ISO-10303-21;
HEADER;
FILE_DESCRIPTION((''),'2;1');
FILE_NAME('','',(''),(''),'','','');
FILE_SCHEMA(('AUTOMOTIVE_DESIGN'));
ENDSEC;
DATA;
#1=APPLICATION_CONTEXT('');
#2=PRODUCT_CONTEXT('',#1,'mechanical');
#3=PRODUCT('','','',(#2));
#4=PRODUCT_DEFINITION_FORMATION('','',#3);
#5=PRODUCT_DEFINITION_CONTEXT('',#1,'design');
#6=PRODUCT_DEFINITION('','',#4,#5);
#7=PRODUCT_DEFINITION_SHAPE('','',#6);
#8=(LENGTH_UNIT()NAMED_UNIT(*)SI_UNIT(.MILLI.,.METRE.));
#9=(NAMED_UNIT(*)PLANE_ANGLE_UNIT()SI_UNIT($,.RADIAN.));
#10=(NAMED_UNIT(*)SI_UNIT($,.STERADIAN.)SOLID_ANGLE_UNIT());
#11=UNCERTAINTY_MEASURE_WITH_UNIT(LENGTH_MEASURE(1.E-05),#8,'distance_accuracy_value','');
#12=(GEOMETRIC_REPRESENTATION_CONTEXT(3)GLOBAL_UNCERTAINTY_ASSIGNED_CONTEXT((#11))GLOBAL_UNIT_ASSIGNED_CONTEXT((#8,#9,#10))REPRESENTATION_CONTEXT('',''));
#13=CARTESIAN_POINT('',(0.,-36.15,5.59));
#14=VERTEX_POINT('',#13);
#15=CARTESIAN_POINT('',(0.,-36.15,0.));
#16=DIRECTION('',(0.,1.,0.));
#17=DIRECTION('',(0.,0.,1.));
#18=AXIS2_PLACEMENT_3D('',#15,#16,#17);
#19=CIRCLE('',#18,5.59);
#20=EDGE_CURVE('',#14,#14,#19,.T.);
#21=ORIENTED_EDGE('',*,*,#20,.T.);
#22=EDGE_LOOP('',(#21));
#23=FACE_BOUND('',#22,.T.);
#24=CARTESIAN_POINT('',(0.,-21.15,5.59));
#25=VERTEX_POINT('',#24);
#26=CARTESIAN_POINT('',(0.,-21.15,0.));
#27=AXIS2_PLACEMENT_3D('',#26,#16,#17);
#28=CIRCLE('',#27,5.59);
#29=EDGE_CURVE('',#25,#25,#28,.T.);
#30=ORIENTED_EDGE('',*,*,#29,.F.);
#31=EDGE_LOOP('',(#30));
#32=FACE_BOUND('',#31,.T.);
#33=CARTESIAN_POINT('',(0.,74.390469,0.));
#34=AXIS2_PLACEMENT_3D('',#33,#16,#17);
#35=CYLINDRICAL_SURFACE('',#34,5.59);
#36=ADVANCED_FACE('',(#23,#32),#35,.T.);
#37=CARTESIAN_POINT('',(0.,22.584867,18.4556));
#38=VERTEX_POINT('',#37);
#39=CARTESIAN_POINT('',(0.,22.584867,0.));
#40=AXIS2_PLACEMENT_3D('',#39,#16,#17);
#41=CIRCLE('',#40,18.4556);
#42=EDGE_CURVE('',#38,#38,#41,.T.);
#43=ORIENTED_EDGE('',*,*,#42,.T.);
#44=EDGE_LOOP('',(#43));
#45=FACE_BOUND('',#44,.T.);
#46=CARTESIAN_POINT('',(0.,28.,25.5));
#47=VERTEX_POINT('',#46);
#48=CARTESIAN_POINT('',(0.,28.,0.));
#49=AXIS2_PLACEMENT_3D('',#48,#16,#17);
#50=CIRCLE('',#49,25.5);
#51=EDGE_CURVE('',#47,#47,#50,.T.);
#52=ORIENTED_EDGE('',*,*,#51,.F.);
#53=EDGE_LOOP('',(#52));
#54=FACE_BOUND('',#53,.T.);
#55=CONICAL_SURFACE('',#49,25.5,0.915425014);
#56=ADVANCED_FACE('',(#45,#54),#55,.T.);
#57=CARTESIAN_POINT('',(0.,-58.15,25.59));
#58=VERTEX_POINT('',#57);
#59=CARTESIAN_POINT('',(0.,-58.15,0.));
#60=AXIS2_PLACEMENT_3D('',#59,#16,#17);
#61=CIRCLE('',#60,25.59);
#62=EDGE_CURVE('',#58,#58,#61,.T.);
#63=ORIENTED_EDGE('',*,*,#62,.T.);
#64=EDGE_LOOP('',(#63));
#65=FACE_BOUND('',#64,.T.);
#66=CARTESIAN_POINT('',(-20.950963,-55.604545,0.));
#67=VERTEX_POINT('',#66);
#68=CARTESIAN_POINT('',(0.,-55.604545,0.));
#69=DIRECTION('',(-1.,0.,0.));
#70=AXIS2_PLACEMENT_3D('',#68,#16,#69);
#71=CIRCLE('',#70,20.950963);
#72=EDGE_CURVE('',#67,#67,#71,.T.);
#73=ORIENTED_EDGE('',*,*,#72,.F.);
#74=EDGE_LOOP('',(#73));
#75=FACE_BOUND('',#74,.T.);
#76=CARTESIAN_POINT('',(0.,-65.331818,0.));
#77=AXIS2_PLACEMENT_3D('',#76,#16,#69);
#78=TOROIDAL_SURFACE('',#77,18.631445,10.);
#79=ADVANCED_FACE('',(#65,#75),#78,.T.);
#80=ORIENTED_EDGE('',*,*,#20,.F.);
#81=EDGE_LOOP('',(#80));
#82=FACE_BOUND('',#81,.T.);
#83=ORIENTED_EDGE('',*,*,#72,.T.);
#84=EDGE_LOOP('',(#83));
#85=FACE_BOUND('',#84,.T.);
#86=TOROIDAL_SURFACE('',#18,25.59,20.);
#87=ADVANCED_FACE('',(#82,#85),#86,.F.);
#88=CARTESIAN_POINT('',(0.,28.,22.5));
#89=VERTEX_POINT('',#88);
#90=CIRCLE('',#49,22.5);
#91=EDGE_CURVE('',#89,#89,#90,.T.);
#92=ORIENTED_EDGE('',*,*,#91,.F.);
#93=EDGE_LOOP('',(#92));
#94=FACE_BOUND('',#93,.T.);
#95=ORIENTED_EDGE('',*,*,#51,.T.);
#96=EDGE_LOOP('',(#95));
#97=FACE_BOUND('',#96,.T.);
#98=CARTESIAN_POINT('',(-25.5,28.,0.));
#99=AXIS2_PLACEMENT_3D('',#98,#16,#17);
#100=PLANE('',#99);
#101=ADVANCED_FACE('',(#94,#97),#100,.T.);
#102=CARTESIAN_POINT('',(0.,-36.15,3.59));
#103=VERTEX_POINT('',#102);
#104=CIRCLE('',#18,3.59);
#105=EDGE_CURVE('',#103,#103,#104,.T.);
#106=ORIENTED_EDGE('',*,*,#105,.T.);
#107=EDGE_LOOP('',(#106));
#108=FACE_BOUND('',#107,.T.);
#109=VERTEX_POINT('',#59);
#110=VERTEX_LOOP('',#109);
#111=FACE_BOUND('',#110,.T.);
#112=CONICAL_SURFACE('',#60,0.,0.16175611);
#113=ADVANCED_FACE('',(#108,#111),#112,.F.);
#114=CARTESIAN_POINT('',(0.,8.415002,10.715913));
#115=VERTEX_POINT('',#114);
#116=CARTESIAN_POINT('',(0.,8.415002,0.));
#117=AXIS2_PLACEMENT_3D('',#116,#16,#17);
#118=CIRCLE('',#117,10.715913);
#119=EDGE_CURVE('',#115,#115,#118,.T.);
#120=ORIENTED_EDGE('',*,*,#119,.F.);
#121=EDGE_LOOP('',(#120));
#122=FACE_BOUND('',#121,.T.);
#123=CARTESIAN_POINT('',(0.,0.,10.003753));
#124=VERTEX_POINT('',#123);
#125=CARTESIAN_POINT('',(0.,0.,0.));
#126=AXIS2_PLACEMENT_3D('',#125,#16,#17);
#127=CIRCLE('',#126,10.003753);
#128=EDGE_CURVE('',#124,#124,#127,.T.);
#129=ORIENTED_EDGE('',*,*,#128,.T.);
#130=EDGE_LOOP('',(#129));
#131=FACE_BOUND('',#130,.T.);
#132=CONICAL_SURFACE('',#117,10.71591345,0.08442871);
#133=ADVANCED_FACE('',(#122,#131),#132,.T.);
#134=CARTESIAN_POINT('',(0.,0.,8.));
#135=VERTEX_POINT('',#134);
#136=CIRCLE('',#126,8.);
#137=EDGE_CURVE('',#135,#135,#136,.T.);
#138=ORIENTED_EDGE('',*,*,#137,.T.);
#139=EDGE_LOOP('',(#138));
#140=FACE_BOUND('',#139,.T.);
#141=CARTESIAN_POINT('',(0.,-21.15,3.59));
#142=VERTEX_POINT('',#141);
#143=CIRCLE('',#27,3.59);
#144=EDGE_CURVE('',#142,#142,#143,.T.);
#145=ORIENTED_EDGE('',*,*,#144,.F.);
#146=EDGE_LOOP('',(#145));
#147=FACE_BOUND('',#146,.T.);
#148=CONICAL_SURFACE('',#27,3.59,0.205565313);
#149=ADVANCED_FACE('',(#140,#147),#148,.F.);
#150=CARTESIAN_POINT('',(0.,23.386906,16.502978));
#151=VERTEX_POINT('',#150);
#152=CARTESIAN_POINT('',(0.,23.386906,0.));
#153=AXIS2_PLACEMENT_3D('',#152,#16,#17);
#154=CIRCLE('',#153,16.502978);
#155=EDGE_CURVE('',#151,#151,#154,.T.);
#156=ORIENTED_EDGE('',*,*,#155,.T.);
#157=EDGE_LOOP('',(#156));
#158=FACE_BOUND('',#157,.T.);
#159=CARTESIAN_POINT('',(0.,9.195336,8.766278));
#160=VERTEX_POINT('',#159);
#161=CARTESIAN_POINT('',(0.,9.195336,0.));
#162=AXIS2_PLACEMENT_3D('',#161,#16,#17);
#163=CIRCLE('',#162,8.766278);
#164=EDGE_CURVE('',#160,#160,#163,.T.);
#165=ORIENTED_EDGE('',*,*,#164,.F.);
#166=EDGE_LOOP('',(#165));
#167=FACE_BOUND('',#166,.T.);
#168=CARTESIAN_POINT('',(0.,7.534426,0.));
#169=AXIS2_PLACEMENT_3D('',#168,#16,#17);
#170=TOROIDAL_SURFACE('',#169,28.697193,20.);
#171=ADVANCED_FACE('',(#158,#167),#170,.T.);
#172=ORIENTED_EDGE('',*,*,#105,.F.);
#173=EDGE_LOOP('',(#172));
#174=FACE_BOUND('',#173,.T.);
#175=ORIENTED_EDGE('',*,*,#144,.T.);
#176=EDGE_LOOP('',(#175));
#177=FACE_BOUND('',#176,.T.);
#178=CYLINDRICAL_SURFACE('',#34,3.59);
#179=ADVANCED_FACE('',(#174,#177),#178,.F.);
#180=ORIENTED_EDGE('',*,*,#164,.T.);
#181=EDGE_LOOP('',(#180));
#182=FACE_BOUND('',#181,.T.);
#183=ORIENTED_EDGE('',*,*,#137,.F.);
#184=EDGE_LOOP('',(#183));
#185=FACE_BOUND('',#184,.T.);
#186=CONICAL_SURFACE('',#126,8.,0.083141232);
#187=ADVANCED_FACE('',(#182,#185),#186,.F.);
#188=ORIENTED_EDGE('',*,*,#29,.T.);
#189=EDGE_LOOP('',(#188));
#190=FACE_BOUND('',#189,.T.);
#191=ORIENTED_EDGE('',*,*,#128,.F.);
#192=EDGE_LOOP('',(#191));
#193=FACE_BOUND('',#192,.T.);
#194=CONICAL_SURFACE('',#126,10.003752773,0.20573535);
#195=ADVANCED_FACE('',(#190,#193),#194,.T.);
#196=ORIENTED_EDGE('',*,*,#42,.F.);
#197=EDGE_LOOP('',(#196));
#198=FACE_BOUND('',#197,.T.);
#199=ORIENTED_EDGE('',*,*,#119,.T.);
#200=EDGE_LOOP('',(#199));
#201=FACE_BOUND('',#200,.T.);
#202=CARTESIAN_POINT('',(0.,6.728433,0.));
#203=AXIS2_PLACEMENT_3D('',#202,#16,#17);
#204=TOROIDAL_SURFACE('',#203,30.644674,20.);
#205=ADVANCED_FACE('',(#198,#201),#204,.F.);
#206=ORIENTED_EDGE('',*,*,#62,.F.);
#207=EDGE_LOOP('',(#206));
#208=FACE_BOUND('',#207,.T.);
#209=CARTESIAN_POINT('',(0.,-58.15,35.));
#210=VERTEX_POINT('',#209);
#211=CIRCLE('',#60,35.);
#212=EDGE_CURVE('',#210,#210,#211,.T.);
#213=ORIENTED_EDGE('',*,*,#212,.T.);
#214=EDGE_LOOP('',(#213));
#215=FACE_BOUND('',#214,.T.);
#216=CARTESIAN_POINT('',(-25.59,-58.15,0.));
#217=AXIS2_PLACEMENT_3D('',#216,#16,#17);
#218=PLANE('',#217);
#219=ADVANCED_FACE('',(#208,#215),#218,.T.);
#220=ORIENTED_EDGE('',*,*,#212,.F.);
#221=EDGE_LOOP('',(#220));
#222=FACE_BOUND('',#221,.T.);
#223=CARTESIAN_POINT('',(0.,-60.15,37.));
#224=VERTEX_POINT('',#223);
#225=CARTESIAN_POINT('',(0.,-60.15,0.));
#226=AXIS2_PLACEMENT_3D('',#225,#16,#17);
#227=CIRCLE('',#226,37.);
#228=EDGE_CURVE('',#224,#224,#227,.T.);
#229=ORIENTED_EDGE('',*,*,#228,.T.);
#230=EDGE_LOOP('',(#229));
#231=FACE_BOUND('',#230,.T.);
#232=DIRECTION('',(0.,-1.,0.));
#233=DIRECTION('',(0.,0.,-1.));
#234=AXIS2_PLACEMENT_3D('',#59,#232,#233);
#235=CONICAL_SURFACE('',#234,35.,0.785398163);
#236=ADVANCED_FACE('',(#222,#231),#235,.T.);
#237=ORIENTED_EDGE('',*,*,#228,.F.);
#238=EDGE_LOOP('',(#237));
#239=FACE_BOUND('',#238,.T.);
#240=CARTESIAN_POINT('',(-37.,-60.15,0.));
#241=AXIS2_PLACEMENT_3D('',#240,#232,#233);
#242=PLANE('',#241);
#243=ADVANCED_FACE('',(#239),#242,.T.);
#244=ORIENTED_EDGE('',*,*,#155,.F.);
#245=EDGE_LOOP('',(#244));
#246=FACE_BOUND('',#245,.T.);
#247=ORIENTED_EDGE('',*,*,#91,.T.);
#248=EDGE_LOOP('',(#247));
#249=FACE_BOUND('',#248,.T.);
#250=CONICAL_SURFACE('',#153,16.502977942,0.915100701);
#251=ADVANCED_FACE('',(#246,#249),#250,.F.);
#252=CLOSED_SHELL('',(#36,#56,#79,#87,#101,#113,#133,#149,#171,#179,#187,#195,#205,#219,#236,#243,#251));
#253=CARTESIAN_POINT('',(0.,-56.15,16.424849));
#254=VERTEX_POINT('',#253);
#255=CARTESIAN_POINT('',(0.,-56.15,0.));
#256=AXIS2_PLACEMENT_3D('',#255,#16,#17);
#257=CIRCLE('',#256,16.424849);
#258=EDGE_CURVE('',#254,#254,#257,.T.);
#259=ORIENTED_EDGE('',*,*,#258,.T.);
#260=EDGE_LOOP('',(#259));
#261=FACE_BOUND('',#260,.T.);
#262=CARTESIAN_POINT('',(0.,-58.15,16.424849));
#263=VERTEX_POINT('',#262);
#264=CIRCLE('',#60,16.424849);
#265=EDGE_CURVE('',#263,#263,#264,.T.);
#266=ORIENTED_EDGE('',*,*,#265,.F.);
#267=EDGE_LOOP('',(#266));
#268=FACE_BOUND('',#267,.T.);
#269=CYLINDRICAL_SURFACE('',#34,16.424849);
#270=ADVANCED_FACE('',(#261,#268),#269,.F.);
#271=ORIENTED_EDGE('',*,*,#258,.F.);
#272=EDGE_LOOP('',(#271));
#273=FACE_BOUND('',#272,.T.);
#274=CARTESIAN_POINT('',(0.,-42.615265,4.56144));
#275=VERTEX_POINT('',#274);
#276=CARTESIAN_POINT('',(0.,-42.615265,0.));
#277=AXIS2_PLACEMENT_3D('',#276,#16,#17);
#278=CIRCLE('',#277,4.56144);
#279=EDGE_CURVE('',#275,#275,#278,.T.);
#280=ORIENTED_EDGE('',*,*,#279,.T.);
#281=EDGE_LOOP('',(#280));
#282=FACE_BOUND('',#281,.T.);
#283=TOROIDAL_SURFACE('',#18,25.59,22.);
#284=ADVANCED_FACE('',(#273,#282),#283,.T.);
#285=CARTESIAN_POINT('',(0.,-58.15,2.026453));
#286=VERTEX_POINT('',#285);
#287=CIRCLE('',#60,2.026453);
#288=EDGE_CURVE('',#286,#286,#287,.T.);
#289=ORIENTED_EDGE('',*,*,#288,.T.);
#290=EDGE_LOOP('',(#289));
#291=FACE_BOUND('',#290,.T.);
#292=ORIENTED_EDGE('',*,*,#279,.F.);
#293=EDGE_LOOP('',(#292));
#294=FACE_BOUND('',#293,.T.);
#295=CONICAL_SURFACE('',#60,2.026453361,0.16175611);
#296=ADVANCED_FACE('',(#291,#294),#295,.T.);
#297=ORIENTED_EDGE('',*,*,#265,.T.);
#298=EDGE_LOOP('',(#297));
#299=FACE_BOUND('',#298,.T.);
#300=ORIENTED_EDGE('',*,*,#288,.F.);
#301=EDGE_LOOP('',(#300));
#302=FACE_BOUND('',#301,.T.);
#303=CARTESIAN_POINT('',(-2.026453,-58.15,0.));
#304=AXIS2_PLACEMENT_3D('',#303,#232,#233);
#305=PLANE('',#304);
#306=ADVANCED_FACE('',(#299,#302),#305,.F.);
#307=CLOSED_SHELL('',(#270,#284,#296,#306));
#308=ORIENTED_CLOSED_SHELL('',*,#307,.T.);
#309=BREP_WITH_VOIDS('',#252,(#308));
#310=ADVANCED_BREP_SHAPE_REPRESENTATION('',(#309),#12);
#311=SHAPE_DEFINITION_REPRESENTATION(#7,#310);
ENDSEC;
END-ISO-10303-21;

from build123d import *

# Parameters (mm, degrees)
FILLET1_R = 10


with BuildPart() as part:
    # Sketch1 → Revolve2 (revolve)
    with BuildSketch(Plane.XY, mode=Mode.PRIVATE) as revolve2_sk:
        with BuildLine():
            Line((-3.59, -36.15), (-3.59, -21.15))
            Line((-3.59, -21.15), (-8, 0))
            Line((-8, 0), (-8.766277994, 9.195335924))
            ThreePointArc((-8.766277994, 9.195335924), (-11.137120078, 17.107504902), (-16.502977942, 23.386906109))
            Line((-16.502977942, 23.386906109), (-22.5, 28))
            Line((-22.5, 28), (-25.5, 28))
            Line((-25.5, 28), (-18.455600302, 22.584866513))
            ThreePointArc((-18.455600302, 22.584866513), (-13.092321233, 16.315659868), (-10.71591345, 8.415001644))
            Line((-10.71591345, 8.415001644), (-10.003752773, 0))
            Line((-10.003752773, 0), (-5.59, -21.15))
            Line((-5.59, -21.15), (-5.59, -36.15))
            ThreePointArc((-5.59, -36.15), (-11.447864376, -50.292135624), (-25.59, -56.15))
            Line((-25.59, -56.15), (-25.59, -58.15))
            Line((-25.59, -58.15), (-35, -58.15))
            Line((-35, -58.15), (-37, -60.15))
            Line((-37, -60.15), (0, -60.15))
            Line((0, -60.15), (0, -58.15))
            Line((0, -58.15), (-3.59, -36.15))
        make_face()
        with BuildLine():
            Line((-16.42484861, -56.15), (-16.42484861, -58.15))
            Line((-16.42484861, -58.15), (-2.026453361, -58.15))
            Line((-2.026453361, -58.15), (-4.561439674, -42.615264931))
            ThreePointArc((-4.561439674, -42.615264931), (-9.045746613, -50.651299247), (-16.42484861, -56.15))
        make_face(mode=Mode.SUBTRACT)
    revolve(revolve2_sk.sketch.rotate(Axis((0, 74.39046888, 0), (0, -1, 0)), 270), axis=Axis((0, 74.39046888, 0), (0, -1, 0)))

    # Fillet1
    # the kernel refuses this fillet: 10 mm, written as the material it takes off along each edge
    with BuildSketch(Plane(origin=(0, -56.15, 0), x_dir=(0, 0, 1), z_dir=(1, 0, 0))) as fillet1_piece_1:
        with BuildLine():
            CenterArc((18.631445006, 9.181818182), FILLET1_R, 283.412011605, 30.683417109)
            Line((25.59, 2), (25.7291711, 1.856363636))
            ThreePointArc((25.7291711, 1.856363636), (25.79, 1), (25.79, 0))
            Line((25.79, 0), (25.59, -0.2))
            ThreePointArc((25.59, -0.2), (23.277858136, -0.335463392), (20.997353704, -0.74))
            Line((20.997353704, -0.74), (20.950963337, -0.545454545))
        make_face()
    revolve(axis=Axis((0, -56.15, 0), (0, -1, 0)), mode=Mode.SUBTRACT)


solid = part.part
